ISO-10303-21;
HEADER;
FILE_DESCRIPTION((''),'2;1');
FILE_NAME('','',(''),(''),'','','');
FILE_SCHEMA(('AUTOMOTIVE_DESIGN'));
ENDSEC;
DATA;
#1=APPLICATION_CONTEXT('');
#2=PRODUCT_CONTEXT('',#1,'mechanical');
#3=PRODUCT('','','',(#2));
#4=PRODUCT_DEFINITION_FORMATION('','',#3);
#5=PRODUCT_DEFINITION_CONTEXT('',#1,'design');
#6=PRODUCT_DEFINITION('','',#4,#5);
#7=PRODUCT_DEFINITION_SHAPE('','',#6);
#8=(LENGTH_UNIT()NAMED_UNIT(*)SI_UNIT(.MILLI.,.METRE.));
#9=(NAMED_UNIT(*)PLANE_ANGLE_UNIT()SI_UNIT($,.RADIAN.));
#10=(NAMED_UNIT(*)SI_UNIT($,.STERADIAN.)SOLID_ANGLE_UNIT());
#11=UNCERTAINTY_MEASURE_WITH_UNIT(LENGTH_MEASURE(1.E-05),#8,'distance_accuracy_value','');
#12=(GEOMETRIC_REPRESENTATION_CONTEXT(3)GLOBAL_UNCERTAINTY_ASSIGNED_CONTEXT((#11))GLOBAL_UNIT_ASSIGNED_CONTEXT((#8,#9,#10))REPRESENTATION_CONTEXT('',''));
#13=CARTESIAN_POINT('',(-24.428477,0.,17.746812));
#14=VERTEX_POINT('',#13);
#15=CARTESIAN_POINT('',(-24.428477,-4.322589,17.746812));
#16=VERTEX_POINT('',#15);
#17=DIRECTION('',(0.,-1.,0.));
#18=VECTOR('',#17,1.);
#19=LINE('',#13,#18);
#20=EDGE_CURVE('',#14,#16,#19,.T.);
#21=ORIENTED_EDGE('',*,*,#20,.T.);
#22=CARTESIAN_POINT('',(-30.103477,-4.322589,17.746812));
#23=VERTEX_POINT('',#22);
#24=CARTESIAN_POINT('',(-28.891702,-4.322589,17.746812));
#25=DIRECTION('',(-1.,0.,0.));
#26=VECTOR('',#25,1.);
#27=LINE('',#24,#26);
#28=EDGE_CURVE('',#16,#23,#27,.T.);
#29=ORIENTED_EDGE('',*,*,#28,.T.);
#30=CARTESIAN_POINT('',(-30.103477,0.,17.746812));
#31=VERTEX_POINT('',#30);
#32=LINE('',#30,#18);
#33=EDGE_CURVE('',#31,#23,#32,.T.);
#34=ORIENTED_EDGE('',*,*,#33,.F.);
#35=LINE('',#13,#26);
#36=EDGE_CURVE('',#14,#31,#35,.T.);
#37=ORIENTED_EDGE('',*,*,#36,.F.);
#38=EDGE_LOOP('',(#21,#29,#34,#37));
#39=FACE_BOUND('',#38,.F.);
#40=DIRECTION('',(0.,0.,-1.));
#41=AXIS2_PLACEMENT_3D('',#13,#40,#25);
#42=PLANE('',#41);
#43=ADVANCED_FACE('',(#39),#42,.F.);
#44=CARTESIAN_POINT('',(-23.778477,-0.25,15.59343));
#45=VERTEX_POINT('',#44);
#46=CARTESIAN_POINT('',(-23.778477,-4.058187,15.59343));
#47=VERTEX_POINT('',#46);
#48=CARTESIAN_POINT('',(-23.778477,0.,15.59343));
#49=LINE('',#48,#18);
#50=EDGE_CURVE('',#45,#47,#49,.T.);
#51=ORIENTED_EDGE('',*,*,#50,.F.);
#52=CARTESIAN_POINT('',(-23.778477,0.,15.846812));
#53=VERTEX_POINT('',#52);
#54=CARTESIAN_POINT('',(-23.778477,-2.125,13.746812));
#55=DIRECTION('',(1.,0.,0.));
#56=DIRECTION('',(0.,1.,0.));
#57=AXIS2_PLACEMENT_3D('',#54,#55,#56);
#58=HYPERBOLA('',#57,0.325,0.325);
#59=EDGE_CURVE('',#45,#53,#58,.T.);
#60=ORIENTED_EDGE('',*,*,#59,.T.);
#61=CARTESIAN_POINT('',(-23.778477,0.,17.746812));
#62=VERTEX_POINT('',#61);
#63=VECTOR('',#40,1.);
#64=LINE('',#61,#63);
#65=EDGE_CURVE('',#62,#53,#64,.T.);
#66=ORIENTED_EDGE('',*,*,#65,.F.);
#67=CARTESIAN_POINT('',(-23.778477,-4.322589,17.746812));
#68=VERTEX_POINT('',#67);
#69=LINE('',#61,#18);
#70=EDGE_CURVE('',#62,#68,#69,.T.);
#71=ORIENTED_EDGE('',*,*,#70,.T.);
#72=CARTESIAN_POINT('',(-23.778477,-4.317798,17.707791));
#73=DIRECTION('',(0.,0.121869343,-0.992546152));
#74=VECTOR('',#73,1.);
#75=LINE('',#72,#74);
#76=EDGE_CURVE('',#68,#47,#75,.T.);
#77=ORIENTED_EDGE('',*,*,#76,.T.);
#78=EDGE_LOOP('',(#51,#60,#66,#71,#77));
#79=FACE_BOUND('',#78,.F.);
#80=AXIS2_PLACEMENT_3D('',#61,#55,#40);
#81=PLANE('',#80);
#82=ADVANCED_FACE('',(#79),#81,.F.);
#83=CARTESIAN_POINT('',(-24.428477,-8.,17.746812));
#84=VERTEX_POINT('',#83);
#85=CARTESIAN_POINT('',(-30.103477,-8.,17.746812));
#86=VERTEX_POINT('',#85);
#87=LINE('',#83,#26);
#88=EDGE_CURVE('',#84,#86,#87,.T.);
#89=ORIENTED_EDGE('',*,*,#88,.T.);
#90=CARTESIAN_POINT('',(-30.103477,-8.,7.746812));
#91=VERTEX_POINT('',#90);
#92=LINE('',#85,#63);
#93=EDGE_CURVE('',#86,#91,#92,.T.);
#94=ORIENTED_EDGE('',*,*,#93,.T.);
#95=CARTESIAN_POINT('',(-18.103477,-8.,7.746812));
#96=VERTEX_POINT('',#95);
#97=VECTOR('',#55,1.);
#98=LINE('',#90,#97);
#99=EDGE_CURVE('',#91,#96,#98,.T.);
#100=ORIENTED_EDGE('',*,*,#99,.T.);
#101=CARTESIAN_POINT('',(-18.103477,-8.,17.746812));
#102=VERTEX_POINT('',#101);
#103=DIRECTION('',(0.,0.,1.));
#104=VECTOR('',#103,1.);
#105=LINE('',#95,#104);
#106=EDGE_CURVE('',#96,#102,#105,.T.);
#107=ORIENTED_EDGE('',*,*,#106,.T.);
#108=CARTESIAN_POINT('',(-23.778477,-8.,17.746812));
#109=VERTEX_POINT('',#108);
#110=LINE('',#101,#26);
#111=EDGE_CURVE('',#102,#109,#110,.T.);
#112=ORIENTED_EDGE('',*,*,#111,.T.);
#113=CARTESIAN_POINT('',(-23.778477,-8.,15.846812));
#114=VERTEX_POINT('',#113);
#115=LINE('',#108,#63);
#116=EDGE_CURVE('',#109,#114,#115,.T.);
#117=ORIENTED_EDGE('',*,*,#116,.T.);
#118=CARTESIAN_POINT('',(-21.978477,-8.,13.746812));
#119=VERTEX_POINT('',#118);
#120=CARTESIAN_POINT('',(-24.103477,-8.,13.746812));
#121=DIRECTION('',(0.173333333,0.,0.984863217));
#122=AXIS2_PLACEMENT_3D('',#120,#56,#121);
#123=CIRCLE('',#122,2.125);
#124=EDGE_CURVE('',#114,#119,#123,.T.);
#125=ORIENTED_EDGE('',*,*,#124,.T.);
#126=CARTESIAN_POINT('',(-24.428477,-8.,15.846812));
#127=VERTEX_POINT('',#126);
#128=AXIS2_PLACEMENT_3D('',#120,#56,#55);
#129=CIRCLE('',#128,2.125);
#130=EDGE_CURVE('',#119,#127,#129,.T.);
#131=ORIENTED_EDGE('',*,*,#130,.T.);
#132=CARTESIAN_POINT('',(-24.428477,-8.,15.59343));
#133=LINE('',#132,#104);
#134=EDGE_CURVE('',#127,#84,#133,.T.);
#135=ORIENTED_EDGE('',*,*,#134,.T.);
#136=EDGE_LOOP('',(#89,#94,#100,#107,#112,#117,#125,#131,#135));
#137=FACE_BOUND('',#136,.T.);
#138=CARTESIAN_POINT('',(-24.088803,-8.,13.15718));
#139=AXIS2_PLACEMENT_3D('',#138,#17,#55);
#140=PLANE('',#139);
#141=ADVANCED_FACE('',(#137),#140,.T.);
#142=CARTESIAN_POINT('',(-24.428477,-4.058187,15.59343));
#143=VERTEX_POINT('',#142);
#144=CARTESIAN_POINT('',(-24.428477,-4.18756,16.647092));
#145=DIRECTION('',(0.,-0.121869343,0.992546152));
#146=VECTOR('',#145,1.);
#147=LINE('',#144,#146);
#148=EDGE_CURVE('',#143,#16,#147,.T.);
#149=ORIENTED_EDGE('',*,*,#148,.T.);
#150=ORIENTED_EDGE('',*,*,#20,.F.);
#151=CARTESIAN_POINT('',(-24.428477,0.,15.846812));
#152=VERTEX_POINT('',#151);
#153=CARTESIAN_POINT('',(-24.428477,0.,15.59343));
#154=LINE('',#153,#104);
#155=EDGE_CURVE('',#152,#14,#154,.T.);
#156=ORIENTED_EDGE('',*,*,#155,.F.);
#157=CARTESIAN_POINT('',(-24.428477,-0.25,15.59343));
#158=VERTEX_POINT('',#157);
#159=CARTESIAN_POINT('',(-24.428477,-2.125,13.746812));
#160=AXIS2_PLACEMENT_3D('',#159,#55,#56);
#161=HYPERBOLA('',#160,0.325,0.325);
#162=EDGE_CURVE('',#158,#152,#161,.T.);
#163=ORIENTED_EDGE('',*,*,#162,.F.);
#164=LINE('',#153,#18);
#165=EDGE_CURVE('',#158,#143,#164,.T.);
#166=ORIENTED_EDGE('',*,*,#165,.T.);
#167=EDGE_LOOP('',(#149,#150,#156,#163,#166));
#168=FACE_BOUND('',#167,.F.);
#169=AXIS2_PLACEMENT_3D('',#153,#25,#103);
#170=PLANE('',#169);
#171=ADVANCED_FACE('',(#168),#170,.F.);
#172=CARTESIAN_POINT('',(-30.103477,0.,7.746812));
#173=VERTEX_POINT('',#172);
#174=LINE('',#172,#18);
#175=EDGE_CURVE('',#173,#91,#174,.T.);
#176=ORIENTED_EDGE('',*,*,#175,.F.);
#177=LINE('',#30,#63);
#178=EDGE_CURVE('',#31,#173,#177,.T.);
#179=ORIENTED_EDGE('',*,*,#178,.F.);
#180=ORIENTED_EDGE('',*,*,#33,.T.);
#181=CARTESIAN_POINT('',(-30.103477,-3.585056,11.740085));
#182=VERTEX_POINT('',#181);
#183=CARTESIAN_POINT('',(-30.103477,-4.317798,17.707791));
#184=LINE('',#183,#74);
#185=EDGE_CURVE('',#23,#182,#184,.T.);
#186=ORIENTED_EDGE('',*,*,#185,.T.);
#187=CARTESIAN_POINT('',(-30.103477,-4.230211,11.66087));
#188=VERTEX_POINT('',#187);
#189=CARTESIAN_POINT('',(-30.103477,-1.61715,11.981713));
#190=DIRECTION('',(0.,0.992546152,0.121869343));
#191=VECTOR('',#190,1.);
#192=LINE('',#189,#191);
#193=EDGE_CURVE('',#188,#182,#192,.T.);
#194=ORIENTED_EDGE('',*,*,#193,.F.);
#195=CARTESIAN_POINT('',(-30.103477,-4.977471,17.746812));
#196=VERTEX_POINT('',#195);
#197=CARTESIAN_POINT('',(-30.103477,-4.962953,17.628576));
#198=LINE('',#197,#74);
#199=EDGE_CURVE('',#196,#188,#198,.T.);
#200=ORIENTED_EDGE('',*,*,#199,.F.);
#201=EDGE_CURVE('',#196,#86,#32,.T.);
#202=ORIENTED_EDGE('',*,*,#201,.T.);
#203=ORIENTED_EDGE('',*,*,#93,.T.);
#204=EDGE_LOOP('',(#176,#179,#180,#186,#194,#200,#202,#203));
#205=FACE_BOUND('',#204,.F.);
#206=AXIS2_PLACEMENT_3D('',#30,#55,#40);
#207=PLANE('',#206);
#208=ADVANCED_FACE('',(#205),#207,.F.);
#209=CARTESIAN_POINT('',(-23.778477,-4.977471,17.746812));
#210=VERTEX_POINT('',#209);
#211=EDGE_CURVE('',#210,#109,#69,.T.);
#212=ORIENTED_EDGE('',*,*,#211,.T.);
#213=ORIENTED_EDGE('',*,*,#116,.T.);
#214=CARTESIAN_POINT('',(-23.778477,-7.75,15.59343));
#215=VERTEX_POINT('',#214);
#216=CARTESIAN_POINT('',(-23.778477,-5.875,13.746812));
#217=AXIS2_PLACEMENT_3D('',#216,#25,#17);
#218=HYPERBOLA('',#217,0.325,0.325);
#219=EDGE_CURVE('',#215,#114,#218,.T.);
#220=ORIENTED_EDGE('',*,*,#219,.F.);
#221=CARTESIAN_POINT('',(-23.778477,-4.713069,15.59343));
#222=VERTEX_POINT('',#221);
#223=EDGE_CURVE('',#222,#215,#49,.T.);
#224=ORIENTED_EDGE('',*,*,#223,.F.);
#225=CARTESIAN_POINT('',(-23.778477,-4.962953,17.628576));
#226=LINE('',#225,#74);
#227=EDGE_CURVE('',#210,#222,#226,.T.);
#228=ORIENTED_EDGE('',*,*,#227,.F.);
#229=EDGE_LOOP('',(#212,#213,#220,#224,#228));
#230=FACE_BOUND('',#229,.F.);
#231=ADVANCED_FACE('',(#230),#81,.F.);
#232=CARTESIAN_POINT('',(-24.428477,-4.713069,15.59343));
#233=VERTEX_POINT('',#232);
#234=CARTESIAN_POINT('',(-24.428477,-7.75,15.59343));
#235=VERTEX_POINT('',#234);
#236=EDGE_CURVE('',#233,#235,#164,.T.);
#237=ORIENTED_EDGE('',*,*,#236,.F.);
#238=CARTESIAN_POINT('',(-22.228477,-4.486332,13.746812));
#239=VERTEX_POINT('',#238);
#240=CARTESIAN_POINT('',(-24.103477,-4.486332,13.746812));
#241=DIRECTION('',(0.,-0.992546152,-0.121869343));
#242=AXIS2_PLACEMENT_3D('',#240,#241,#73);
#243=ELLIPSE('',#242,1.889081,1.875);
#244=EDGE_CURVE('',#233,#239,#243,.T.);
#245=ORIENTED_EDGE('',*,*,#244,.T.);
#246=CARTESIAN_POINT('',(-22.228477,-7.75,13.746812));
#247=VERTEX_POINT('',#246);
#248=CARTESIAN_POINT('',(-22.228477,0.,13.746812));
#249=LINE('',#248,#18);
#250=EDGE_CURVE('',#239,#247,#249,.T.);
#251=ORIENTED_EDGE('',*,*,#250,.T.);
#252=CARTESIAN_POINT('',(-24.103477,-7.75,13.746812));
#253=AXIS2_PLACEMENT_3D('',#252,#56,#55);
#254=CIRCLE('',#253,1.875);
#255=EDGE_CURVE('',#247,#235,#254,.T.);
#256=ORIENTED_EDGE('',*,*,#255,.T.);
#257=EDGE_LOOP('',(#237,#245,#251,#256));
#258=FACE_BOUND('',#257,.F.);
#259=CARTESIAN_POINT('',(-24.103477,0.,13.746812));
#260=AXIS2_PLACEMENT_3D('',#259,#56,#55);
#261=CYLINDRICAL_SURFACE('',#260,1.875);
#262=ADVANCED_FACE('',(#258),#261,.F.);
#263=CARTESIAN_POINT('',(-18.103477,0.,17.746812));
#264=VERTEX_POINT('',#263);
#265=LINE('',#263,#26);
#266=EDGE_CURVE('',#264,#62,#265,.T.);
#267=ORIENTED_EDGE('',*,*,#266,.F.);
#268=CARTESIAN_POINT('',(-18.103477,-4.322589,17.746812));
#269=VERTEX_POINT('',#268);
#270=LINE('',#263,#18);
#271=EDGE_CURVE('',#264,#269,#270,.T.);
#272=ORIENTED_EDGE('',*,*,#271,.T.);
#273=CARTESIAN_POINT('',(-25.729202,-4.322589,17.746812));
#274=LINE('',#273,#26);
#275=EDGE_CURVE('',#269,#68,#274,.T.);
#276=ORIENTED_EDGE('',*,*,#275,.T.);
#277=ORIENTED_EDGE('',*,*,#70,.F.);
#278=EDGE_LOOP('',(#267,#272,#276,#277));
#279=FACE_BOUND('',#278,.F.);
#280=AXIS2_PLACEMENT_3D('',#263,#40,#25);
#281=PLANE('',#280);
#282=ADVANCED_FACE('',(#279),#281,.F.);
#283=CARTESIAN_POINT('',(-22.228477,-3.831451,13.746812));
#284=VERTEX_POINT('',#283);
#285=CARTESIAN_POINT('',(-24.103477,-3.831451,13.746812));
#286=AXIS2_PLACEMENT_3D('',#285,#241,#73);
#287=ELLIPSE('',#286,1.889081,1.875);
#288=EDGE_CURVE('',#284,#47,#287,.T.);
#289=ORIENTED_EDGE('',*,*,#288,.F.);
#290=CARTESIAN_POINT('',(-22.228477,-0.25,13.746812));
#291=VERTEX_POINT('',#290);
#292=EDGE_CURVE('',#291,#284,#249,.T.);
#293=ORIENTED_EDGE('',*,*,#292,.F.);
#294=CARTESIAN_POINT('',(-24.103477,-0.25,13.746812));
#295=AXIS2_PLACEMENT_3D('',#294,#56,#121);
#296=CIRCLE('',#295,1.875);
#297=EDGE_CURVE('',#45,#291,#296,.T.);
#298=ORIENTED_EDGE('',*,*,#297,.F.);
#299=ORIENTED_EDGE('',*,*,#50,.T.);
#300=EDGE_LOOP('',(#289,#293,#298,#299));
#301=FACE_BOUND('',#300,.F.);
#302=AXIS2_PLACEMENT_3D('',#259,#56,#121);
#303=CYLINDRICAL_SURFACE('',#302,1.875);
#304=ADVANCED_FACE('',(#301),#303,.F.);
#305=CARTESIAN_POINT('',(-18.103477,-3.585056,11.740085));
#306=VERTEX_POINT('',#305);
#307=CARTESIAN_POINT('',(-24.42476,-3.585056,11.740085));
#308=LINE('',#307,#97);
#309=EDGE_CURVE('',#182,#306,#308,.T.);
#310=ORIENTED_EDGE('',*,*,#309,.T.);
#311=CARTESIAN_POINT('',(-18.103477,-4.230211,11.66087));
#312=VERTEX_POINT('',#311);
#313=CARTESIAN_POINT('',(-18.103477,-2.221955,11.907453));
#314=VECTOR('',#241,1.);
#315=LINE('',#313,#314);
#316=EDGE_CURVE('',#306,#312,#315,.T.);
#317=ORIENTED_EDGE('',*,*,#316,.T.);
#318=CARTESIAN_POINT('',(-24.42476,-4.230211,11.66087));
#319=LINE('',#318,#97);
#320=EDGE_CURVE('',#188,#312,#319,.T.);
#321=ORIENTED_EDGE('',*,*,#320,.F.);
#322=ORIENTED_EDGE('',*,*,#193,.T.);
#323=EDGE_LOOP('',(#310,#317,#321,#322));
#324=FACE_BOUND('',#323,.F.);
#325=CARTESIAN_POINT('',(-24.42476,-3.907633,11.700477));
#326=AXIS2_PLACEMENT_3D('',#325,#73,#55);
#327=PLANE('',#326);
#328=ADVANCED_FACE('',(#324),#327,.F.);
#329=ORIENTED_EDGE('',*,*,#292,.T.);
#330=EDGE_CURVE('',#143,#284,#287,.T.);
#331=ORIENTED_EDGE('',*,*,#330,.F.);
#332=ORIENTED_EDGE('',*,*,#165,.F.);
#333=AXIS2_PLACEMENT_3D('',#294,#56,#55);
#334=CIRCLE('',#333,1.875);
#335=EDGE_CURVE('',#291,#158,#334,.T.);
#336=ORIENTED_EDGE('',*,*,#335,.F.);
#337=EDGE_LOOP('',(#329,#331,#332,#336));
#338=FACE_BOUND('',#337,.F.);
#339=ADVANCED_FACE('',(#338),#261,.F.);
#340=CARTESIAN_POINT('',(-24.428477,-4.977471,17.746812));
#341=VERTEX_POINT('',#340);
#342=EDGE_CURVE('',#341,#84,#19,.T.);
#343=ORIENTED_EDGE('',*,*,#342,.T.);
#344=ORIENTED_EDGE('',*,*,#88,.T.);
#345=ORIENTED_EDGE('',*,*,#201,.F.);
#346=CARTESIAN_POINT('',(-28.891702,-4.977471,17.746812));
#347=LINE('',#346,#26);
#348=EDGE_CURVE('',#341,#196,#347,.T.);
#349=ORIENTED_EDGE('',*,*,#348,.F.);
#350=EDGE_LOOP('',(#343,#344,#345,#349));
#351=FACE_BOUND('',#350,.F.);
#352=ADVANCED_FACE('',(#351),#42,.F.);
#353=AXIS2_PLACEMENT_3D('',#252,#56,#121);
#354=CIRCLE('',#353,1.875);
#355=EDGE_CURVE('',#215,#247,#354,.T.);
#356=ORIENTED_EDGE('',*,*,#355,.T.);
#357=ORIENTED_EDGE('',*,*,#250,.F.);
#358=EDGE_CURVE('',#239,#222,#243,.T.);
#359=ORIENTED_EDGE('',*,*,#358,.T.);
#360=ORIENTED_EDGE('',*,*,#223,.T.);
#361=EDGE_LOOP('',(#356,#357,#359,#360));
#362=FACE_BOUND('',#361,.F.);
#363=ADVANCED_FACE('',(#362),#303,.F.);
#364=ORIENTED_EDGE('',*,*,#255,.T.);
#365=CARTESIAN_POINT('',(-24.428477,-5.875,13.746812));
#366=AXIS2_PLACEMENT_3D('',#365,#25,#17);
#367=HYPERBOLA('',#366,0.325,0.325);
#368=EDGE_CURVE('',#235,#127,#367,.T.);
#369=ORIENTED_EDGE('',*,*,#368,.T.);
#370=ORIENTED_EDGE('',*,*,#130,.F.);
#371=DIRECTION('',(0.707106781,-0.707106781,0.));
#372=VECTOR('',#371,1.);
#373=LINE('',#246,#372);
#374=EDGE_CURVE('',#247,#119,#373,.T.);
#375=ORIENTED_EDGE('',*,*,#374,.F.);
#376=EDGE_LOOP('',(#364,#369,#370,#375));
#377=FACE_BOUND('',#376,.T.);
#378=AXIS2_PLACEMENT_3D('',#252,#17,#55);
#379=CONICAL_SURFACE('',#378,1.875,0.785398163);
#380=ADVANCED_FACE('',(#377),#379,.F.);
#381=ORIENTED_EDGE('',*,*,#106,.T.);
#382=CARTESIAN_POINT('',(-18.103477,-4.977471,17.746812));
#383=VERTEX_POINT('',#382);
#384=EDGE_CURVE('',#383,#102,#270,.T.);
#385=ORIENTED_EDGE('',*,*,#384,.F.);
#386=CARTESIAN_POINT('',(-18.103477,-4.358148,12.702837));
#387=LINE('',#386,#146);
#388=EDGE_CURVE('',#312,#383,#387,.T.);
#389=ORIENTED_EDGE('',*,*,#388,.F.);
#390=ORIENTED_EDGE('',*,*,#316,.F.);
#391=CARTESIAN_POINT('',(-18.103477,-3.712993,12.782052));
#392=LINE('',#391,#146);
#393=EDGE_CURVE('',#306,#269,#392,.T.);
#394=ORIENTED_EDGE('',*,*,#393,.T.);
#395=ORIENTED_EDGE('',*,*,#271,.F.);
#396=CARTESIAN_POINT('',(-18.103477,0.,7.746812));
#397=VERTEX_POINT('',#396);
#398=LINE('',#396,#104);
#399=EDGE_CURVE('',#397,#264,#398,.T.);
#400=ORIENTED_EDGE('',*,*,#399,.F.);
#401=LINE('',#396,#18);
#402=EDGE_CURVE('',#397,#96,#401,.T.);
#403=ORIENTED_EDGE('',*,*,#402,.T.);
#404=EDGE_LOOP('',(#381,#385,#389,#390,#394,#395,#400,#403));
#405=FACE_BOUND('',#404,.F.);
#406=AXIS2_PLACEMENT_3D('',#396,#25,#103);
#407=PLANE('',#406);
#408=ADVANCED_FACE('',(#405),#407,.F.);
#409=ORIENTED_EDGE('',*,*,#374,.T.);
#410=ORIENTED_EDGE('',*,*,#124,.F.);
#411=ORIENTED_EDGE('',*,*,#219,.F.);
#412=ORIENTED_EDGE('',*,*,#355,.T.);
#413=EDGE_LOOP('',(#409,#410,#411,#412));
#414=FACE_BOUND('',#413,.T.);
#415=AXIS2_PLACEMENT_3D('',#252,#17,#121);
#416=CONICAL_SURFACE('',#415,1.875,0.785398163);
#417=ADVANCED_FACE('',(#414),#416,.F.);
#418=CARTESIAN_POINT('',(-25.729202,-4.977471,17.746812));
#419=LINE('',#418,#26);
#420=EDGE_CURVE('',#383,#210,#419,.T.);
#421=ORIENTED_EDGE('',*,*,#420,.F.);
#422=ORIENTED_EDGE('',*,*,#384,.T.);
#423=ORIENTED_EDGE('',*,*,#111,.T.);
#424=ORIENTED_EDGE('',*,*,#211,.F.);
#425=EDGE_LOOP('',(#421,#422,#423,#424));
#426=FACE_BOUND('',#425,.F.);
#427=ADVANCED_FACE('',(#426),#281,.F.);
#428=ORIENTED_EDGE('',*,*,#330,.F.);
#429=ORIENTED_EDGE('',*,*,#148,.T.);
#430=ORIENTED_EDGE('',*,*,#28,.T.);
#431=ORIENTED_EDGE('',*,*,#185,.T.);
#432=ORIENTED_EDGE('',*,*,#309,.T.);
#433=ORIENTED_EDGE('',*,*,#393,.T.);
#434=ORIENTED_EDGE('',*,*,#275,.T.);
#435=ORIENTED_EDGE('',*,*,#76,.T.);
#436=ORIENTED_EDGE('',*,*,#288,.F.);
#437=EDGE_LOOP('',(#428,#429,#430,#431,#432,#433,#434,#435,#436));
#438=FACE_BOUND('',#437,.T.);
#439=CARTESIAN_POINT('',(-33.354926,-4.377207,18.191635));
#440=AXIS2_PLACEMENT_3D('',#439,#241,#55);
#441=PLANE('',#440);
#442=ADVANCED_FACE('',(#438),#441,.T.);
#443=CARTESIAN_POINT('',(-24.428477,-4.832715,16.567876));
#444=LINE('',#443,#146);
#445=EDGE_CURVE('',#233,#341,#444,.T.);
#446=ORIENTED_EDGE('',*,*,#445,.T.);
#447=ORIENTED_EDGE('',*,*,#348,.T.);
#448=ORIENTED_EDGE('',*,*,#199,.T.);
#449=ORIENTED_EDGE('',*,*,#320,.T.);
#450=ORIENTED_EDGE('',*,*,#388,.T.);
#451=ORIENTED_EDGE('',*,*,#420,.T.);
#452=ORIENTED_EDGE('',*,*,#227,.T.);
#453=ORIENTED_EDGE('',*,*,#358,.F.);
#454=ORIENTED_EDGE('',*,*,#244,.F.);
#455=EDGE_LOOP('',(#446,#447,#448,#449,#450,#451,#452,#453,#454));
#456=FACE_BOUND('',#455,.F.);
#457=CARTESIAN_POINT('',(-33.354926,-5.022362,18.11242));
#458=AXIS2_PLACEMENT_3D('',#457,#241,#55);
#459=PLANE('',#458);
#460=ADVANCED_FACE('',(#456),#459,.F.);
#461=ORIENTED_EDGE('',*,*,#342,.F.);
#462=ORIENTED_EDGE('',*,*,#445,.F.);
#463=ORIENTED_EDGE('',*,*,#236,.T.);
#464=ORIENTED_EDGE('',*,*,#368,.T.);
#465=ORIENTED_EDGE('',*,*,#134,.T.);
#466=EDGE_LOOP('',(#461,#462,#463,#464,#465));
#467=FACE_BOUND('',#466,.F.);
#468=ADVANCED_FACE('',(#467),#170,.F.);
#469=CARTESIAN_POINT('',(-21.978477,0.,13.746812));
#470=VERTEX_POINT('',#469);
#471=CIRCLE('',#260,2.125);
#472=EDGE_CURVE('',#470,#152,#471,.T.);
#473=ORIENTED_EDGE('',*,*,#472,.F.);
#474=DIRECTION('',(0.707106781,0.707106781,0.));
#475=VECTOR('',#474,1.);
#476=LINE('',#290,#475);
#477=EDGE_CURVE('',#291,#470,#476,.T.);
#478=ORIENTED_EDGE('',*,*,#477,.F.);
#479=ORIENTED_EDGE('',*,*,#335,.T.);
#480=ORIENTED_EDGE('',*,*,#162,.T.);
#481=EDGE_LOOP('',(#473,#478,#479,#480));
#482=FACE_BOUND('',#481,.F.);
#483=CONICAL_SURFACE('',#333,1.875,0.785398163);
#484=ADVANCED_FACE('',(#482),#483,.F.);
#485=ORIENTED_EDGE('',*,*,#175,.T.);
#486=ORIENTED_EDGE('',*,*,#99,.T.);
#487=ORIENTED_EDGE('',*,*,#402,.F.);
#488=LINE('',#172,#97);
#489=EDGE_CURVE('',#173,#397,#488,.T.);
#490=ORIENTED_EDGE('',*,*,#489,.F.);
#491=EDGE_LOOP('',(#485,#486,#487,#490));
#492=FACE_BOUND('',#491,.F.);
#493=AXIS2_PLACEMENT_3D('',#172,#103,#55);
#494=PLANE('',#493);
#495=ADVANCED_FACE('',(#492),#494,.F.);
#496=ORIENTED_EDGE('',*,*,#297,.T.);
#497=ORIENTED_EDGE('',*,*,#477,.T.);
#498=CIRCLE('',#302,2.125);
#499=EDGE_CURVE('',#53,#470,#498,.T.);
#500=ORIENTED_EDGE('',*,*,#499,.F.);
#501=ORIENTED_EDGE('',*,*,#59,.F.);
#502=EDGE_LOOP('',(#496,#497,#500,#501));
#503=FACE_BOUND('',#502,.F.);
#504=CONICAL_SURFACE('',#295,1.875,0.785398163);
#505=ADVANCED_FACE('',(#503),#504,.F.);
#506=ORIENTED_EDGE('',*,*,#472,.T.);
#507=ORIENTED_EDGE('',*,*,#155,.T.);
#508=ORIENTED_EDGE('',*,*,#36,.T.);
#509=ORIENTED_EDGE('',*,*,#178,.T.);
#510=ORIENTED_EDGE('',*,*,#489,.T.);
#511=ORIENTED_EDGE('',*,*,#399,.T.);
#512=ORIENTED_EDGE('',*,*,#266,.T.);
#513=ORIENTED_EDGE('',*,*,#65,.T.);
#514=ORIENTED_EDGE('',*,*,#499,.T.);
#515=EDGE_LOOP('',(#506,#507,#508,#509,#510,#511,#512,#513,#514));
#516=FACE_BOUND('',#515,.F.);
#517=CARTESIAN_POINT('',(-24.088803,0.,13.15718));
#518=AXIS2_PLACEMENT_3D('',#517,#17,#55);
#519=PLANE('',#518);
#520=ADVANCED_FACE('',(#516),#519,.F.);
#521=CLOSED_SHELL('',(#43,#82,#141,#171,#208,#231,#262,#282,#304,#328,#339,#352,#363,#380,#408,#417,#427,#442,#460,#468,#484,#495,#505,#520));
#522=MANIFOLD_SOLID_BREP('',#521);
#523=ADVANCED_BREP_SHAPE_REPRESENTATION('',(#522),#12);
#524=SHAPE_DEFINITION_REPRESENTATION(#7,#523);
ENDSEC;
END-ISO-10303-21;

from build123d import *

# Parameters (mm, degrees)
F1_DEPTH = 8
F2_SIZE  = 0.25
F4_W     = 17.8603331085
F4_H     = 0.65
F5_DEPTH = 6.5


with BuildPart() as f1:
    # F0 (on Front) → F1 (new body)
    with BuildSketch(Plane.XZ):
        with BuildLine():
            Line((-24.4284769839, 17.7468117975), (-30.1034769839, 17.7468117975))
            Line((-30.1034769839, 17.7468117975), (-30.1034769839, 7.7468117975))
            Line((-30.1034769839, 7.7468117975), (-18.1034769839, 7.7468117975))
            Line((-18.1034769839, 7.7468117975), (-18.1034769839, 17.7468117975))
            Line((-18.1034769839, 17.7468117975), (-23.7784769839, 17.7468117975))
            Line((-23.7784769839, 17.7468117975), (-23.7784769839, 15.5934303288))
            ThreePointArc((-23.7784769839, 15.5934303288), (-22.6673363223, 14.9522681427), (-22.2284769839, 13.7468117975))
            ThreePointArc((-22.2284769839, 13.7468117975), (-25.308933329, 12.3106711359), (-24.4284769839, 15.5934303288))
            Line((-24.4284769839, 15.5934303288), (-24.4284769839, 17.7468117975))
        make_face()
    extrude(amount=F1_DEPTH)

    # F2
    f2_edges = [f1.edges().sort_by_distance(p)[0] for p in [
        (-24.103477, 0, 11.871812),
        (-24.103477, -8, 11.871812),
    ]]
    chamfer(f2_edges, length=F2_SIZE)

    # F4 (on face) → F5 (cut)
    with BuildSketch(Plane(origin=(0, -2.2654882704, 18.4509213023), x_dir=(1, 0, 0), z_dir=(0, 0.1218693434, -0.9925461516))):
        with Locations((-24.4247596711, 2.4525769118)):
            Rectangle(F4_W, F4_H)
    extrude(amount=F5_DEPTH, mode=Mode.SUBTRACT)


solid = f1.part
